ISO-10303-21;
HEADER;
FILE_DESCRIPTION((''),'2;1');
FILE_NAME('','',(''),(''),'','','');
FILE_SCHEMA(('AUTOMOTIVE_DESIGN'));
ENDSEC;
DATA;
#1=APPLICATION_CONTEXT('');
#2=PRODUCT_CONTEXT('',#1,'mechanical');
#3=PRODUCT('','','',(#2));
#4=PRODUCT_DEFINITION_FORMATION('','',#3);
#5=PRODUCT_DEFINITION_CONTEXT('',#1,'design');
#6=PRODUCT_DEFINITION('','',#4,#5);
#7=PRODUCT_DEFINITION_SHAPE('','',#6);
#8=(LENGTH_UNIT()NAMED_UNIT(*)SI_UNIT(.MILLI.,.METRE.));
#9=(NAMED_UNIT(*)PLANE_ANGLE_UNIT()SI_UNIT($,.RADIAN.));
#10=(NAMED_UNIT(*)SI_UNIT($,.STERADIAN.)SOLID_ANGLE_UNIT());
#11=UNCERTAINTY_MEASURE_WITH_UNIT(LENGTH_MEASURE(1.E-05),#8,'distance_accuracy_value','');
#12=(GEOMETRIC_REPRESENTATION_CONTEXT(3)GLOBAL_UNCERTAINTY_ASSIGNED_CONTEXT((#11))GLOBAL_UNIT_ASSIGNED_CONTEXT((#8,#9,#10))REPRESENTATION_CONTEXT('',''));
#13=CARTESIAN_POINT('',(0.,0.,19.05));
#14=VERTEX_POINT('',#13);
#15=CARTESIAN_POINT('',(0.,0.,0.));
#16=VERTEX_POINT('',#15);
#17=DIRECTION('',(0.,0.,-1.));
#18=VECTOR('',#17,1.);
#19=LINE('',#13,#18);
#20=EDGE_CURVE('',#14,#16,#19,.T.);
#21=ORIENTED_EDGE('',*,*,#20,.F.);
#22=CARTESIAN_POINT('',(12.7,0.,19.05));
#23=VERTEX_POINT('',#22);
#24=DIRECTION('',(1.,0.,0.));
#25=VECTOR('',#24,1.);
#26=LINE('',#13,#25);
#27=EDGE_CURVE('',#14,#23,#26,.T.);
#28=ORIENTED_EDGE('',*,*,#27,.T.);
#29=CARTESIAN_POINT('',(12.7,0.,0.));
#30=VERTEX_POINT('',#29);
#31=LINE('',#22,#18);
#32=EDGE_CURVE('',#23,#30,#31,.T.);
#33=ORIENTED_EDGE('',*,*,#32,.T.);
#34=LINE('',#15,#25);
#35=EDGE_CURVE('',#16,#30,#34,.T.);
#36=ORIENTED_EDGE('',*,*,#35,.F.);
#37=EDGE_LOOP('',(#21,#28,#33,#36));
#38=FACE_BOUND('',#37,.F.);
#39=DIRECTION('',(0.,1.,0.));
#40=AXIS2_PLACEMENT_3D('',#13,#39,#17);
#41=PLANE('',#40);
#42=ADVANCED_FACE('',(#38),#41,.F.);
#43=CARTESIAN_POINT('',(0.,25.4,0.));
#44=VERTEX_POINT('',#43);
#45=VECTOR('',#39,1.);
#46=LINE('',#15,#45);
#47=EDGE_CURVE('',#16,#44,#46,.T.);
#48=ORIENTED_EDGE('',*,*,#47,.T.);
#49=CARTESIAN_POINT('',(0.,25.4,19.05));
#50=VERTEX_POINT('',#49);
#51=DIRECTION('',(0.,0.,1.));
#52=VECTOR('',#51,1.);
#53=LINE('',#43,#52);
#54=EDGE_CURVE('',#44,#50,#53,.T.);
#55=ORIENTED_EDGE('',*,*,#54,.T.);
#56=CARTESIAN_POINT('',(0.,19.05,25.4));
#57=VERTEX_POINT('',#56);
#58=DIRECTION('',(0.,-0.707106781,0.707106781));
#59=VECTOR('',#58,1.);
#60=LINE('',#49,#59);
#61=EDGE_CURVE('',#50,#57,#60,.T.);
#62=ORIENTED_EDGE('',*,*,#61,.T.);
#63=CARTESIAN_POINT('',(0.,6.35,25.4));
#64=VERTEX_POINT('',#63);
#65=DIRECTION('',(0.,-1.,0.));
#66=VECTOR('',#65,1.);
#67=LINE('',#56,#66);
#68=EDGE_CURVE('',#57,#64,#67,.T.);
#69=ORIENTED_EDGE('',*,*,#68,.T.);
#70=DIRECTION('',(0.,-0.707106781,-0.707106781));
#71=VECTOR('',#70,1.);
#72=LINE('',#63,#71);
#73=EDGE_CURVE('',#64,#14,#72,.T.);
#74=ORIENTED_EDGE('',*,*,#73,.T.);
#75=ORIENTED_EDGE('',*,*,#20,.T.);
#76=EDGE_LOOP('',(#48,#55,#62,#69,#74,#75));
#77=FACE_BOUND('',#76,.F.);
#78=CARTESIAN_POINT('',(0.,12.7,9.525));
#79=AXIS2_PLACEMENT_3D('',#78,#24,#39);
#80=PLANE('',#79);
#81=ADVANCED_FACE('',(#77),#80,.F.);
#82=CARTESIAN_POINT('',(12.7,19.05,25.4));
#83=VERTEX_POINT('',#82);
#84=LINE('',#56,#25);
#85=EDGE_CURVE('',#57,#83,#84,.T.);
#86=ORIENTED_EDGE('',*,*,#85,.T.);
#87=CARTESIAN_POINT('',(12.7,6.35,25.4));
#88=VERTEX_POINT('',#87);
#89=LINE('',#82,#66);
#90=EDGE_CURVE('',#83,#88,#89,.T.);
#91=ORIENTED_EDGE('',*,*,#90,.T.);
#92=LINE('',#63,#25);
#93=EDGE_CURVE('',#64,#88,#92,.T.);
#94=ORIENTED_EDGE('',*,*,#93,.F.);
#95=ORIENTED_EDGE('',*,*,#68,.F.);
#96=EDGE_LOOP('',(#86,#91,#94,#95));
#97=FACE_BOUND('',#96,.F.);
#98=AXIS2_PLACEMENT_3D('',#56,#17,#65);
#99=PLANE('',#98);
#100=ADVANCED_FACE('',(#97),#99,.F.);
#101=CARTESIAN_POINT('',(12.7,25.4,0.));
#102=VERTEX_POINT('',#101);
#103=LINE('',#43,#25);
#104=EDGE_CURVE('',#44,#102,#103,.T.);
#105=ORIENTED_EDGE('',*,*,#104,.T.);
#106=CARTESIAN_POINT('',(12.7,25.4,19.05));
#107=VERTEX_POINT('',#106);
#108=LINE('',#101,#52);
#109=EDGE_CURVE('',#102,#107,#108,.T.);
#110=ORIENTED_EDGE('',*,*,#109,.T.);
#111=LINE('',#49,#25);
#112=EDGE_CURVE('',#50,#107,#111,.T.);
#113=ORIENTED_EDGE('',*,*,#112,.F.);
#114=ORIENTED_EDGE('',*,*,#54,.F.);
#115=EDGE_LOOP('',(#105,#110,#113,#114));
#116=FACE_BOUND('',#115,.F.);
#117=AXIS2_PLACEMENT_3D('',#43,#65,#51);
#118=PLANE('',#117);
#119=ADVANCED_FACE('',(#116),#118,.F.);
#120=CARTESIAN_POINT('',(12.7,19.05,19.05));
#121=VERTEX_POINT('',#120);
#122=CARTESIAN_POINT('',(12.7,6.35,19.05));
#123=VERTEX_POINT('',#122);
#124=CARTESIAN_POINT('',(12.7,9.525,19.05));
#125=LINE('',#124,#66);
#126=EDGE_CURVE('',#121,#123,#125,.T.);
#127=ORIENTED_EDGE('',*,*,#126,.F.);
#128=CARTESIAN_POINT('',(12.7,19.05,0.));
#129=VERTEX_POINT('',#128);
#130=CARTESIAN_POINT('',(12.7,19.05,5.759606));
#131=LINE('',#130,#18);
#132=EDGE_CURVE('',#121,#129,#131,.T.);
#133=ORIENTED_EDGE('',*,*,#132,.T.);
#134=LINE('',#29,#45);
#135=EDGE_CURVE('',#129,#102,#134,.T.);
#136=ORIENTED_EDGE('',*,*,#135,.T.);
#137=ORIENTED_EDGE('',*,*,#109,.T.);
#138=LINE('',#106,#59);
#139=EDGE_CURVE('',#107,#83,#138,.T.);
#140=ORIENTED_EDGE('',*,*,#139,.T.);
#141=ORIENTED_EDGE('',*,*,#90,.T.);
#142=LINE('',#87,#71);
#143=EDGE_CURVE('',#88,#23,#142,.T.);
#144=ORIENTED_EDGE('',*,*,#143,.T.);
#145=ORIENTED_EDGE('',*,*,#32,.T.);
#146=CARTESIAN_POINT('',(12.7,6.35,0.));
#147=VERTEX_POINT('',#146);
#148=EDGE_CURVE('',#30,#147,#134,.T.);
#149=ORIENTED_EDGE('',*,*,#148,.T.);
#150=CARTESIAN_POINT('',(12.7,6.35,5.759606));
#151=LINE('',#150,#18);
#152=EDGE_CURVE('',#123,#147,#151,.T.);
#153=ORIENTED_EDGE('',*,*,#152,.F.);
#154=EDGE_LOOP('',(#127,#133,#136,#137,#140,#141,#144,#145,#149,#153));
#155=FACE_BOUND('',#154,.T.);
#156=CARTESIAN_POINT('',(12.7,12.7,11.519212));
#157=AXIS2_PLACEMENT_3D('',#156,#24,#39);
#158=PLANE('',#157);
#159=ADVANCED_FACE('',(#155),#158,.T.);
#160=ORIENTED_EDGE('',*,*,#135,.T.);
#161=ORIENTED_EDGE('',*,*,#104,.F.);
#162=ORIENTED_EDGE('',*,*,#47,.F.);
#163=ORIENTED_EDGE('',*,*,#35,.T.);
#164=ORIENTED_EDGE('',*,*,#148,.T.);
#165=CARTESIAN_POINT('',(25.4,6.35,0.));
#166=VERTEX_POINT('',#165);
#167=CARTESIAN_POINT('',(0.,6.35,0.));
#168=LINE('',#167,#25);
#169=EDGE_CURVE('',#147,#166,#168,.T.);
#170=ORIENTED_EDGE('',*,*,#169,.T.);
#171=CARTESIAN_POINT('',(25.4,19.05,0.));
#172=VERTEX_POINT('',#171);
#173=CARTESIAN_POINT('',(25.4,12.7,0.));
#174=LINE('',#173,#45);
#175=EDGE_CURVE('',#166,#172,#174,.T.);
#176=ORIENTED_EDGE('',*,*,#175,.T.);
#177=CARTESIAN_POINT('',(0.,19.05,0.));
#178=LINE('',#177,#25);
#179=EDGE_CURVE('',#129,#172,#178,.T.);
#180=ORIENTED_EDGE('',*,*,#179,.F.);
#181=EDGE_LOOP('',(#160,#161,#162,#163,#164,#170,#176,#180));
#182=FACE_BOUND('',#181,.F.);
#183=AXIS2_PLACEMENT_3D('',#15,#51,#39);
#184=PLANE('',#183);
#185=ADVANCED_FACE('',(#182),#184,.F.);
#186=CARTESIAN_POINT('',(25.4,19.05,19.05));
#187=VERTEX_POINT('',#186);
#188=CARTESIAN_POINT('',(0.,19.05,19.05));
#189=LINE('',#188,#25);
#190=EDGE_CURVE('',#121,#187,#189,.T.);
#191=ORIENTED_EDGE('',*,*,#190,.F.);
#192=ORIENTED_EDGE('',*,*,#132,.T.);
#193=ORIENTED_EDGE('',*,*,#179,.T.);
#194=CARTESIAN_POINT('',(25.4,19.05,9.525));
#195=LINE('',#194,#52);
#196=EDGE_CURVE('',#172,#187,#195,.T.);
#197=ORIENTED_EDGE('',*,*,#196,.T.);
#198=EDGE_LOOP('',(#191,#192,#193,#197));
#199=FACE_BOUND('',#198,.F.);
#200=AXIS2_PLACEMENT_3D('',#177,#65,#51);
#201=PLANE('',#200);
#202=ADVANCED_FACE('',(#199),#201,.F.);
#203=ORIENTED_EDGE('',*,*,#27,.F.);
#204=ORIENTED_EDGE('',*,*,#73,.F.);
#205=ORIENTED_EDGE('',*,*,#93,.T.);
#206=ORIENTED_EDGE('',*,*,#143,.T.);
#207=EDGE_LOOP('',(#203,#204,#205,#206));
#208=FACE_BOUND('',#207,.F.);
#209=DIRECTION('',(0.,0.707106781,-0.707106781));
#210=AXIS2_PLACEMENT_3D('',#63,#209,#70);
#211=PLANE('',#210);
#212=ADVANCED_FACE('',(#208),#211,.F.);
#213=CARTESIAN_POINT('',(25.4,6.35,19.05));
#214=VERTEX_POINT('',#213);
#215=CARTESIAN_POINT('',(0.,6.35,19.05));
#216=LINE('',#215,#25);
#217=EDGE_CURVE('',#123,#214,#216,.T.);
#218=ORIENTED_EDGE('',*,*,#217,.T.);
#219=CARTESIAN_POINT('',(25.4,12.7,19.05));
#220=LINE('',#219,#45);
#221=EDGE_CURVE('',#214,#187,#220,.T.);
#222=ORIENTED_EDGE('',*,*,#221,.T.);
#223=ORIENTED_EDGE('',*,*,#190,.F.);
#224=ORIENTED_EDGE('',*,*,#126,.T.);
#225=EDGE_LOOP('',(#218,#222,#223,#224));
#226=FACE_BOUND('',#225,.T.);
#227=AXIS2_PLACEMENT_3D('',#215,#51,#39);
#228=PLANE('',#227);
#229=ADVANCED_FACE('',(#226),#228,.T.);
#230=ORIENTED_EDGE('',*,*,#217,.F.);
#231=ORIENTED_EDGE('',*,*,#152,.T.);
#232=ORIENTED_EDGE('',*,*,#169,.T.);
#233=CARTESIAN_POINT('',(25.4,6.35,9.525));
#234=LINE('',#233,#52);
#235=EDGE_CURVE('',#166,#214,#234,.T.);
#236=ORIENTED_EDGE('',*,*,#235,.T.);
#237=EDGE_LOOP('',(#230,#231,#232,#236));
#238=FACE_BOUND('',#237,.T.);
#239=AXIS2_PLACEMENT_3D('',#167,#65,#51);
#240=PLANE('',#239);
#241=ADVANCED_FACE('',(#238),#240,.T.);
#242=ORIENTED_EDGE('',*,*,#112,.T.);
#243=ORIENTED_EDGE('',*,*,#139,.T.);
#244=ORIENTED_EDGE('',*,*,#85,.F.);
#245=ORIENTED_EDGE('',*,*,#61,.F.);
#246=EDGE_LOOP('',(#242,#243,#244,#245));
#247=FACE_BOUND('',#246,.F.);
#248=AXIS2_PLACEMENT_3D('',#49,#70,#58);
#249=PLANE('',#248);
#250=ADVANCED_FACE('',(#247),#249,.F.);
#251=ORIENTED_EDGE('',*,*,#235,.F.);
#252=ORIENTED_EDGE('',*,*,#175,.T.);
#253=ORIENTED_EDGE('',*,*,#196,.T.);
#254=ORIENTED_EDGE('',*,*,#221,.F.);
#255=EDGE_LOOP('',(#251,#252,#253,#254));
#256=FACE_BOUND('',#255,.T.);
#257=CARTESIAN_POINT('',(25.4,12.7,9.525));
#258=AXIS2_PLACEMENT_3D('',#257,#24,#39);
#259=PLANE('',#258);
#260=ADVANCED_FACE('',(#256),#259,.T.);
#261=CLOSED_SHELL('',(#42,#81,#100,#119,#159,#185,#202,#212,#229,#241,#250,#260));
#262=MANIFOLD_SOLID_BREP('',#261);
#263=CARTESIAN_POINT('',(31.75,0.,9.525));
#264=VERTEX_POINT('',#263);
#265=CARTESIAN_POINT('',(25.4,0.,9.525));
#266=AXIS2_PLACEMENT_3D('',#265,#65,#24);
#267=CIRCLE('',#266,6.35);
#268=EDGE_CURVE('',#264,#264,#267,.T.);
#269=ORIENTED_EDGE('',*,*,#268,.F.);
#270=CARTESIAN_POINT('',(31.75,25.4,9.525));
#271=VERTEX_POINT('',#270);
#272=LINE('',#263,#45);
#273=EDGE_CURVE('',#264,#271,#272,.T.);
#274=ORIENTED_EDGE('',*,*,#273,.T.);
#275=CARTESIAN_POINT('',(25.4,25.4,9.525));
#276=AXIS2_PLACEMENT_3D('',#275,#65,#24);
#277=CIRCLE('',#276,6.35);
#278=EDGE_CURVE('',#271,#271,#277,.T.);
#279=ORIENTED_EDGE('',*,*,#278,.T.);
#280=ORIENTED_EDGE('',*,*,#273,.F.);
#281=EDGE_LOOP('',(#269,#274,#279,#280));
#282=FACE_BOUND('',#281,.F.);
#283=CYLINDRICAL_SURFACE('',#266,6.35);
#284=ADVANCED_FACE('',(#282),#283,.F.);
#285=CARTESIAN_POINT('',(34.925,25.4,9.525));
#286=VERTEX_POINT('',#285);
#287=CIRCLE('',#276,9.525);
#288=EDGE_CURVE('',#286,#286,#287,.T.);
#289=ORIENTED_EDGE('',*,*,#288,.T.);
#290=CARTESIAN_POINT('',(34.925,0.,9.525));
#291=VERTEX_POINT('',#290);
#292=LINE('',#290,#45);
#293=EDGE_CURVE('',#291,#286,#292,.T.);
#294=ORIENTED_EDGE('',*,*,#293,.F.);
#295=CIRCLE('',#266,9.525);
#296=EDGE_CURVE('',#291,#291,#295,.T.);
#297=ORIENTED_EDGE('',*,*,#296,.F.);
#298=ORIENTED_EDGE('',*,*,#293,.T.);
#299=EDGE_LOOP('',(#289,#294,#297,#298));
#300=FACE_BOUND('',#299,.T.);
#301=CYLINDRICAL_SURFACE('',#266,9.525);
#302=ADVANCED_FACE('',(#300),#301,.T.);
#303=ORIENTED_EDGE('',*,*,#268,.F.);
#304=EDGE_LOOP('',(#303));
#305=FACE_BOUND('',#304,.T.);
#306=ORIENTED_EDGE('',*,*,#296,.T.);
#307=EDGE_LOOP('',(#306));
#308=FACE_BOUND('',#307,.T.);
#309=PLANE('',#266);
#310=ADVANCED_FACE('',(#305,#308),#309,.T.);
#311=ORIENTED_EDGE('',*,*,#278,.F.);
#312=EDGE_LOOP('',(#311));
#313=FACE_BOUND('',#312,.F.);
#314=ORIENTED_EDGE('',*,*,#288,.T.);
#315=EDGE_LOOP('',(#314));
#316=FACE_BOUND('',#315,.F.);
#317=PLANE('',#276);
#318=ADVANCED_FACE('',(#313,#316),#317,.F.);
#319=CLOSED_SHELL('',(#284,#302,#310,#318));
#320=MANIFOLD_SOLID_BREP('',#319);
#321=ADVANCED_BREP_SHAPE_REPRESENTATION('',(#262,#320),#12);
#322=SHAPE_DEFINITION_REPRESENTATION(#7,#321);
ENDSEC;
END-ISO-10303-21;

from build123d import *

# Parameters (mm, degrees)
F1_DEPTH = 12.7
F2_W     = 12.7
F2_H     = 19.05
F3_DEPTH = 25.4
F4_R     = 9.525
F5_DEPTH = 25.4
F6_R     = 6.35
F7_DEPTH = 25.4


with BuildPart() as f1:
    # F0 (on Right) → F1 (new body)
    with BuildSketch(Plane.YZ):
        Polygon((0, 19.05), (0, 0), (25.4, 0), (25.4, 19.05), (19.05, 25.4), (6.35, 25.4), align=None)
    extrude(amount=F1_DEPTH)

    # F2 (on Right) → F3 (join)
    with BuildSketch(Plane.YZ):
        with Locations((12.7, 9.525)):
            Rectangle(F2_W, F2_H)
    extrude(amount=F3_DEPTH)


with BuildPart() as f5:
    # F4 (on Front) → F5 (new body)
    with BuildSketch(Plane.XZ):
        with Locations((25.4, 9.525)):
            Circle(F4_R)
    extrude(amount=-F5_DEPTH)

    # F6 (on face) → F7 (cut)
    with BuildSketch(Plane.XZ):
        with Locations((25.4, 9.525)):
            Circle(F6_R)
    extrude(amount=-F7_DEPTH, mode=Mode.SUBTRACT)


solid = Compound([f1.part, f5.part])
